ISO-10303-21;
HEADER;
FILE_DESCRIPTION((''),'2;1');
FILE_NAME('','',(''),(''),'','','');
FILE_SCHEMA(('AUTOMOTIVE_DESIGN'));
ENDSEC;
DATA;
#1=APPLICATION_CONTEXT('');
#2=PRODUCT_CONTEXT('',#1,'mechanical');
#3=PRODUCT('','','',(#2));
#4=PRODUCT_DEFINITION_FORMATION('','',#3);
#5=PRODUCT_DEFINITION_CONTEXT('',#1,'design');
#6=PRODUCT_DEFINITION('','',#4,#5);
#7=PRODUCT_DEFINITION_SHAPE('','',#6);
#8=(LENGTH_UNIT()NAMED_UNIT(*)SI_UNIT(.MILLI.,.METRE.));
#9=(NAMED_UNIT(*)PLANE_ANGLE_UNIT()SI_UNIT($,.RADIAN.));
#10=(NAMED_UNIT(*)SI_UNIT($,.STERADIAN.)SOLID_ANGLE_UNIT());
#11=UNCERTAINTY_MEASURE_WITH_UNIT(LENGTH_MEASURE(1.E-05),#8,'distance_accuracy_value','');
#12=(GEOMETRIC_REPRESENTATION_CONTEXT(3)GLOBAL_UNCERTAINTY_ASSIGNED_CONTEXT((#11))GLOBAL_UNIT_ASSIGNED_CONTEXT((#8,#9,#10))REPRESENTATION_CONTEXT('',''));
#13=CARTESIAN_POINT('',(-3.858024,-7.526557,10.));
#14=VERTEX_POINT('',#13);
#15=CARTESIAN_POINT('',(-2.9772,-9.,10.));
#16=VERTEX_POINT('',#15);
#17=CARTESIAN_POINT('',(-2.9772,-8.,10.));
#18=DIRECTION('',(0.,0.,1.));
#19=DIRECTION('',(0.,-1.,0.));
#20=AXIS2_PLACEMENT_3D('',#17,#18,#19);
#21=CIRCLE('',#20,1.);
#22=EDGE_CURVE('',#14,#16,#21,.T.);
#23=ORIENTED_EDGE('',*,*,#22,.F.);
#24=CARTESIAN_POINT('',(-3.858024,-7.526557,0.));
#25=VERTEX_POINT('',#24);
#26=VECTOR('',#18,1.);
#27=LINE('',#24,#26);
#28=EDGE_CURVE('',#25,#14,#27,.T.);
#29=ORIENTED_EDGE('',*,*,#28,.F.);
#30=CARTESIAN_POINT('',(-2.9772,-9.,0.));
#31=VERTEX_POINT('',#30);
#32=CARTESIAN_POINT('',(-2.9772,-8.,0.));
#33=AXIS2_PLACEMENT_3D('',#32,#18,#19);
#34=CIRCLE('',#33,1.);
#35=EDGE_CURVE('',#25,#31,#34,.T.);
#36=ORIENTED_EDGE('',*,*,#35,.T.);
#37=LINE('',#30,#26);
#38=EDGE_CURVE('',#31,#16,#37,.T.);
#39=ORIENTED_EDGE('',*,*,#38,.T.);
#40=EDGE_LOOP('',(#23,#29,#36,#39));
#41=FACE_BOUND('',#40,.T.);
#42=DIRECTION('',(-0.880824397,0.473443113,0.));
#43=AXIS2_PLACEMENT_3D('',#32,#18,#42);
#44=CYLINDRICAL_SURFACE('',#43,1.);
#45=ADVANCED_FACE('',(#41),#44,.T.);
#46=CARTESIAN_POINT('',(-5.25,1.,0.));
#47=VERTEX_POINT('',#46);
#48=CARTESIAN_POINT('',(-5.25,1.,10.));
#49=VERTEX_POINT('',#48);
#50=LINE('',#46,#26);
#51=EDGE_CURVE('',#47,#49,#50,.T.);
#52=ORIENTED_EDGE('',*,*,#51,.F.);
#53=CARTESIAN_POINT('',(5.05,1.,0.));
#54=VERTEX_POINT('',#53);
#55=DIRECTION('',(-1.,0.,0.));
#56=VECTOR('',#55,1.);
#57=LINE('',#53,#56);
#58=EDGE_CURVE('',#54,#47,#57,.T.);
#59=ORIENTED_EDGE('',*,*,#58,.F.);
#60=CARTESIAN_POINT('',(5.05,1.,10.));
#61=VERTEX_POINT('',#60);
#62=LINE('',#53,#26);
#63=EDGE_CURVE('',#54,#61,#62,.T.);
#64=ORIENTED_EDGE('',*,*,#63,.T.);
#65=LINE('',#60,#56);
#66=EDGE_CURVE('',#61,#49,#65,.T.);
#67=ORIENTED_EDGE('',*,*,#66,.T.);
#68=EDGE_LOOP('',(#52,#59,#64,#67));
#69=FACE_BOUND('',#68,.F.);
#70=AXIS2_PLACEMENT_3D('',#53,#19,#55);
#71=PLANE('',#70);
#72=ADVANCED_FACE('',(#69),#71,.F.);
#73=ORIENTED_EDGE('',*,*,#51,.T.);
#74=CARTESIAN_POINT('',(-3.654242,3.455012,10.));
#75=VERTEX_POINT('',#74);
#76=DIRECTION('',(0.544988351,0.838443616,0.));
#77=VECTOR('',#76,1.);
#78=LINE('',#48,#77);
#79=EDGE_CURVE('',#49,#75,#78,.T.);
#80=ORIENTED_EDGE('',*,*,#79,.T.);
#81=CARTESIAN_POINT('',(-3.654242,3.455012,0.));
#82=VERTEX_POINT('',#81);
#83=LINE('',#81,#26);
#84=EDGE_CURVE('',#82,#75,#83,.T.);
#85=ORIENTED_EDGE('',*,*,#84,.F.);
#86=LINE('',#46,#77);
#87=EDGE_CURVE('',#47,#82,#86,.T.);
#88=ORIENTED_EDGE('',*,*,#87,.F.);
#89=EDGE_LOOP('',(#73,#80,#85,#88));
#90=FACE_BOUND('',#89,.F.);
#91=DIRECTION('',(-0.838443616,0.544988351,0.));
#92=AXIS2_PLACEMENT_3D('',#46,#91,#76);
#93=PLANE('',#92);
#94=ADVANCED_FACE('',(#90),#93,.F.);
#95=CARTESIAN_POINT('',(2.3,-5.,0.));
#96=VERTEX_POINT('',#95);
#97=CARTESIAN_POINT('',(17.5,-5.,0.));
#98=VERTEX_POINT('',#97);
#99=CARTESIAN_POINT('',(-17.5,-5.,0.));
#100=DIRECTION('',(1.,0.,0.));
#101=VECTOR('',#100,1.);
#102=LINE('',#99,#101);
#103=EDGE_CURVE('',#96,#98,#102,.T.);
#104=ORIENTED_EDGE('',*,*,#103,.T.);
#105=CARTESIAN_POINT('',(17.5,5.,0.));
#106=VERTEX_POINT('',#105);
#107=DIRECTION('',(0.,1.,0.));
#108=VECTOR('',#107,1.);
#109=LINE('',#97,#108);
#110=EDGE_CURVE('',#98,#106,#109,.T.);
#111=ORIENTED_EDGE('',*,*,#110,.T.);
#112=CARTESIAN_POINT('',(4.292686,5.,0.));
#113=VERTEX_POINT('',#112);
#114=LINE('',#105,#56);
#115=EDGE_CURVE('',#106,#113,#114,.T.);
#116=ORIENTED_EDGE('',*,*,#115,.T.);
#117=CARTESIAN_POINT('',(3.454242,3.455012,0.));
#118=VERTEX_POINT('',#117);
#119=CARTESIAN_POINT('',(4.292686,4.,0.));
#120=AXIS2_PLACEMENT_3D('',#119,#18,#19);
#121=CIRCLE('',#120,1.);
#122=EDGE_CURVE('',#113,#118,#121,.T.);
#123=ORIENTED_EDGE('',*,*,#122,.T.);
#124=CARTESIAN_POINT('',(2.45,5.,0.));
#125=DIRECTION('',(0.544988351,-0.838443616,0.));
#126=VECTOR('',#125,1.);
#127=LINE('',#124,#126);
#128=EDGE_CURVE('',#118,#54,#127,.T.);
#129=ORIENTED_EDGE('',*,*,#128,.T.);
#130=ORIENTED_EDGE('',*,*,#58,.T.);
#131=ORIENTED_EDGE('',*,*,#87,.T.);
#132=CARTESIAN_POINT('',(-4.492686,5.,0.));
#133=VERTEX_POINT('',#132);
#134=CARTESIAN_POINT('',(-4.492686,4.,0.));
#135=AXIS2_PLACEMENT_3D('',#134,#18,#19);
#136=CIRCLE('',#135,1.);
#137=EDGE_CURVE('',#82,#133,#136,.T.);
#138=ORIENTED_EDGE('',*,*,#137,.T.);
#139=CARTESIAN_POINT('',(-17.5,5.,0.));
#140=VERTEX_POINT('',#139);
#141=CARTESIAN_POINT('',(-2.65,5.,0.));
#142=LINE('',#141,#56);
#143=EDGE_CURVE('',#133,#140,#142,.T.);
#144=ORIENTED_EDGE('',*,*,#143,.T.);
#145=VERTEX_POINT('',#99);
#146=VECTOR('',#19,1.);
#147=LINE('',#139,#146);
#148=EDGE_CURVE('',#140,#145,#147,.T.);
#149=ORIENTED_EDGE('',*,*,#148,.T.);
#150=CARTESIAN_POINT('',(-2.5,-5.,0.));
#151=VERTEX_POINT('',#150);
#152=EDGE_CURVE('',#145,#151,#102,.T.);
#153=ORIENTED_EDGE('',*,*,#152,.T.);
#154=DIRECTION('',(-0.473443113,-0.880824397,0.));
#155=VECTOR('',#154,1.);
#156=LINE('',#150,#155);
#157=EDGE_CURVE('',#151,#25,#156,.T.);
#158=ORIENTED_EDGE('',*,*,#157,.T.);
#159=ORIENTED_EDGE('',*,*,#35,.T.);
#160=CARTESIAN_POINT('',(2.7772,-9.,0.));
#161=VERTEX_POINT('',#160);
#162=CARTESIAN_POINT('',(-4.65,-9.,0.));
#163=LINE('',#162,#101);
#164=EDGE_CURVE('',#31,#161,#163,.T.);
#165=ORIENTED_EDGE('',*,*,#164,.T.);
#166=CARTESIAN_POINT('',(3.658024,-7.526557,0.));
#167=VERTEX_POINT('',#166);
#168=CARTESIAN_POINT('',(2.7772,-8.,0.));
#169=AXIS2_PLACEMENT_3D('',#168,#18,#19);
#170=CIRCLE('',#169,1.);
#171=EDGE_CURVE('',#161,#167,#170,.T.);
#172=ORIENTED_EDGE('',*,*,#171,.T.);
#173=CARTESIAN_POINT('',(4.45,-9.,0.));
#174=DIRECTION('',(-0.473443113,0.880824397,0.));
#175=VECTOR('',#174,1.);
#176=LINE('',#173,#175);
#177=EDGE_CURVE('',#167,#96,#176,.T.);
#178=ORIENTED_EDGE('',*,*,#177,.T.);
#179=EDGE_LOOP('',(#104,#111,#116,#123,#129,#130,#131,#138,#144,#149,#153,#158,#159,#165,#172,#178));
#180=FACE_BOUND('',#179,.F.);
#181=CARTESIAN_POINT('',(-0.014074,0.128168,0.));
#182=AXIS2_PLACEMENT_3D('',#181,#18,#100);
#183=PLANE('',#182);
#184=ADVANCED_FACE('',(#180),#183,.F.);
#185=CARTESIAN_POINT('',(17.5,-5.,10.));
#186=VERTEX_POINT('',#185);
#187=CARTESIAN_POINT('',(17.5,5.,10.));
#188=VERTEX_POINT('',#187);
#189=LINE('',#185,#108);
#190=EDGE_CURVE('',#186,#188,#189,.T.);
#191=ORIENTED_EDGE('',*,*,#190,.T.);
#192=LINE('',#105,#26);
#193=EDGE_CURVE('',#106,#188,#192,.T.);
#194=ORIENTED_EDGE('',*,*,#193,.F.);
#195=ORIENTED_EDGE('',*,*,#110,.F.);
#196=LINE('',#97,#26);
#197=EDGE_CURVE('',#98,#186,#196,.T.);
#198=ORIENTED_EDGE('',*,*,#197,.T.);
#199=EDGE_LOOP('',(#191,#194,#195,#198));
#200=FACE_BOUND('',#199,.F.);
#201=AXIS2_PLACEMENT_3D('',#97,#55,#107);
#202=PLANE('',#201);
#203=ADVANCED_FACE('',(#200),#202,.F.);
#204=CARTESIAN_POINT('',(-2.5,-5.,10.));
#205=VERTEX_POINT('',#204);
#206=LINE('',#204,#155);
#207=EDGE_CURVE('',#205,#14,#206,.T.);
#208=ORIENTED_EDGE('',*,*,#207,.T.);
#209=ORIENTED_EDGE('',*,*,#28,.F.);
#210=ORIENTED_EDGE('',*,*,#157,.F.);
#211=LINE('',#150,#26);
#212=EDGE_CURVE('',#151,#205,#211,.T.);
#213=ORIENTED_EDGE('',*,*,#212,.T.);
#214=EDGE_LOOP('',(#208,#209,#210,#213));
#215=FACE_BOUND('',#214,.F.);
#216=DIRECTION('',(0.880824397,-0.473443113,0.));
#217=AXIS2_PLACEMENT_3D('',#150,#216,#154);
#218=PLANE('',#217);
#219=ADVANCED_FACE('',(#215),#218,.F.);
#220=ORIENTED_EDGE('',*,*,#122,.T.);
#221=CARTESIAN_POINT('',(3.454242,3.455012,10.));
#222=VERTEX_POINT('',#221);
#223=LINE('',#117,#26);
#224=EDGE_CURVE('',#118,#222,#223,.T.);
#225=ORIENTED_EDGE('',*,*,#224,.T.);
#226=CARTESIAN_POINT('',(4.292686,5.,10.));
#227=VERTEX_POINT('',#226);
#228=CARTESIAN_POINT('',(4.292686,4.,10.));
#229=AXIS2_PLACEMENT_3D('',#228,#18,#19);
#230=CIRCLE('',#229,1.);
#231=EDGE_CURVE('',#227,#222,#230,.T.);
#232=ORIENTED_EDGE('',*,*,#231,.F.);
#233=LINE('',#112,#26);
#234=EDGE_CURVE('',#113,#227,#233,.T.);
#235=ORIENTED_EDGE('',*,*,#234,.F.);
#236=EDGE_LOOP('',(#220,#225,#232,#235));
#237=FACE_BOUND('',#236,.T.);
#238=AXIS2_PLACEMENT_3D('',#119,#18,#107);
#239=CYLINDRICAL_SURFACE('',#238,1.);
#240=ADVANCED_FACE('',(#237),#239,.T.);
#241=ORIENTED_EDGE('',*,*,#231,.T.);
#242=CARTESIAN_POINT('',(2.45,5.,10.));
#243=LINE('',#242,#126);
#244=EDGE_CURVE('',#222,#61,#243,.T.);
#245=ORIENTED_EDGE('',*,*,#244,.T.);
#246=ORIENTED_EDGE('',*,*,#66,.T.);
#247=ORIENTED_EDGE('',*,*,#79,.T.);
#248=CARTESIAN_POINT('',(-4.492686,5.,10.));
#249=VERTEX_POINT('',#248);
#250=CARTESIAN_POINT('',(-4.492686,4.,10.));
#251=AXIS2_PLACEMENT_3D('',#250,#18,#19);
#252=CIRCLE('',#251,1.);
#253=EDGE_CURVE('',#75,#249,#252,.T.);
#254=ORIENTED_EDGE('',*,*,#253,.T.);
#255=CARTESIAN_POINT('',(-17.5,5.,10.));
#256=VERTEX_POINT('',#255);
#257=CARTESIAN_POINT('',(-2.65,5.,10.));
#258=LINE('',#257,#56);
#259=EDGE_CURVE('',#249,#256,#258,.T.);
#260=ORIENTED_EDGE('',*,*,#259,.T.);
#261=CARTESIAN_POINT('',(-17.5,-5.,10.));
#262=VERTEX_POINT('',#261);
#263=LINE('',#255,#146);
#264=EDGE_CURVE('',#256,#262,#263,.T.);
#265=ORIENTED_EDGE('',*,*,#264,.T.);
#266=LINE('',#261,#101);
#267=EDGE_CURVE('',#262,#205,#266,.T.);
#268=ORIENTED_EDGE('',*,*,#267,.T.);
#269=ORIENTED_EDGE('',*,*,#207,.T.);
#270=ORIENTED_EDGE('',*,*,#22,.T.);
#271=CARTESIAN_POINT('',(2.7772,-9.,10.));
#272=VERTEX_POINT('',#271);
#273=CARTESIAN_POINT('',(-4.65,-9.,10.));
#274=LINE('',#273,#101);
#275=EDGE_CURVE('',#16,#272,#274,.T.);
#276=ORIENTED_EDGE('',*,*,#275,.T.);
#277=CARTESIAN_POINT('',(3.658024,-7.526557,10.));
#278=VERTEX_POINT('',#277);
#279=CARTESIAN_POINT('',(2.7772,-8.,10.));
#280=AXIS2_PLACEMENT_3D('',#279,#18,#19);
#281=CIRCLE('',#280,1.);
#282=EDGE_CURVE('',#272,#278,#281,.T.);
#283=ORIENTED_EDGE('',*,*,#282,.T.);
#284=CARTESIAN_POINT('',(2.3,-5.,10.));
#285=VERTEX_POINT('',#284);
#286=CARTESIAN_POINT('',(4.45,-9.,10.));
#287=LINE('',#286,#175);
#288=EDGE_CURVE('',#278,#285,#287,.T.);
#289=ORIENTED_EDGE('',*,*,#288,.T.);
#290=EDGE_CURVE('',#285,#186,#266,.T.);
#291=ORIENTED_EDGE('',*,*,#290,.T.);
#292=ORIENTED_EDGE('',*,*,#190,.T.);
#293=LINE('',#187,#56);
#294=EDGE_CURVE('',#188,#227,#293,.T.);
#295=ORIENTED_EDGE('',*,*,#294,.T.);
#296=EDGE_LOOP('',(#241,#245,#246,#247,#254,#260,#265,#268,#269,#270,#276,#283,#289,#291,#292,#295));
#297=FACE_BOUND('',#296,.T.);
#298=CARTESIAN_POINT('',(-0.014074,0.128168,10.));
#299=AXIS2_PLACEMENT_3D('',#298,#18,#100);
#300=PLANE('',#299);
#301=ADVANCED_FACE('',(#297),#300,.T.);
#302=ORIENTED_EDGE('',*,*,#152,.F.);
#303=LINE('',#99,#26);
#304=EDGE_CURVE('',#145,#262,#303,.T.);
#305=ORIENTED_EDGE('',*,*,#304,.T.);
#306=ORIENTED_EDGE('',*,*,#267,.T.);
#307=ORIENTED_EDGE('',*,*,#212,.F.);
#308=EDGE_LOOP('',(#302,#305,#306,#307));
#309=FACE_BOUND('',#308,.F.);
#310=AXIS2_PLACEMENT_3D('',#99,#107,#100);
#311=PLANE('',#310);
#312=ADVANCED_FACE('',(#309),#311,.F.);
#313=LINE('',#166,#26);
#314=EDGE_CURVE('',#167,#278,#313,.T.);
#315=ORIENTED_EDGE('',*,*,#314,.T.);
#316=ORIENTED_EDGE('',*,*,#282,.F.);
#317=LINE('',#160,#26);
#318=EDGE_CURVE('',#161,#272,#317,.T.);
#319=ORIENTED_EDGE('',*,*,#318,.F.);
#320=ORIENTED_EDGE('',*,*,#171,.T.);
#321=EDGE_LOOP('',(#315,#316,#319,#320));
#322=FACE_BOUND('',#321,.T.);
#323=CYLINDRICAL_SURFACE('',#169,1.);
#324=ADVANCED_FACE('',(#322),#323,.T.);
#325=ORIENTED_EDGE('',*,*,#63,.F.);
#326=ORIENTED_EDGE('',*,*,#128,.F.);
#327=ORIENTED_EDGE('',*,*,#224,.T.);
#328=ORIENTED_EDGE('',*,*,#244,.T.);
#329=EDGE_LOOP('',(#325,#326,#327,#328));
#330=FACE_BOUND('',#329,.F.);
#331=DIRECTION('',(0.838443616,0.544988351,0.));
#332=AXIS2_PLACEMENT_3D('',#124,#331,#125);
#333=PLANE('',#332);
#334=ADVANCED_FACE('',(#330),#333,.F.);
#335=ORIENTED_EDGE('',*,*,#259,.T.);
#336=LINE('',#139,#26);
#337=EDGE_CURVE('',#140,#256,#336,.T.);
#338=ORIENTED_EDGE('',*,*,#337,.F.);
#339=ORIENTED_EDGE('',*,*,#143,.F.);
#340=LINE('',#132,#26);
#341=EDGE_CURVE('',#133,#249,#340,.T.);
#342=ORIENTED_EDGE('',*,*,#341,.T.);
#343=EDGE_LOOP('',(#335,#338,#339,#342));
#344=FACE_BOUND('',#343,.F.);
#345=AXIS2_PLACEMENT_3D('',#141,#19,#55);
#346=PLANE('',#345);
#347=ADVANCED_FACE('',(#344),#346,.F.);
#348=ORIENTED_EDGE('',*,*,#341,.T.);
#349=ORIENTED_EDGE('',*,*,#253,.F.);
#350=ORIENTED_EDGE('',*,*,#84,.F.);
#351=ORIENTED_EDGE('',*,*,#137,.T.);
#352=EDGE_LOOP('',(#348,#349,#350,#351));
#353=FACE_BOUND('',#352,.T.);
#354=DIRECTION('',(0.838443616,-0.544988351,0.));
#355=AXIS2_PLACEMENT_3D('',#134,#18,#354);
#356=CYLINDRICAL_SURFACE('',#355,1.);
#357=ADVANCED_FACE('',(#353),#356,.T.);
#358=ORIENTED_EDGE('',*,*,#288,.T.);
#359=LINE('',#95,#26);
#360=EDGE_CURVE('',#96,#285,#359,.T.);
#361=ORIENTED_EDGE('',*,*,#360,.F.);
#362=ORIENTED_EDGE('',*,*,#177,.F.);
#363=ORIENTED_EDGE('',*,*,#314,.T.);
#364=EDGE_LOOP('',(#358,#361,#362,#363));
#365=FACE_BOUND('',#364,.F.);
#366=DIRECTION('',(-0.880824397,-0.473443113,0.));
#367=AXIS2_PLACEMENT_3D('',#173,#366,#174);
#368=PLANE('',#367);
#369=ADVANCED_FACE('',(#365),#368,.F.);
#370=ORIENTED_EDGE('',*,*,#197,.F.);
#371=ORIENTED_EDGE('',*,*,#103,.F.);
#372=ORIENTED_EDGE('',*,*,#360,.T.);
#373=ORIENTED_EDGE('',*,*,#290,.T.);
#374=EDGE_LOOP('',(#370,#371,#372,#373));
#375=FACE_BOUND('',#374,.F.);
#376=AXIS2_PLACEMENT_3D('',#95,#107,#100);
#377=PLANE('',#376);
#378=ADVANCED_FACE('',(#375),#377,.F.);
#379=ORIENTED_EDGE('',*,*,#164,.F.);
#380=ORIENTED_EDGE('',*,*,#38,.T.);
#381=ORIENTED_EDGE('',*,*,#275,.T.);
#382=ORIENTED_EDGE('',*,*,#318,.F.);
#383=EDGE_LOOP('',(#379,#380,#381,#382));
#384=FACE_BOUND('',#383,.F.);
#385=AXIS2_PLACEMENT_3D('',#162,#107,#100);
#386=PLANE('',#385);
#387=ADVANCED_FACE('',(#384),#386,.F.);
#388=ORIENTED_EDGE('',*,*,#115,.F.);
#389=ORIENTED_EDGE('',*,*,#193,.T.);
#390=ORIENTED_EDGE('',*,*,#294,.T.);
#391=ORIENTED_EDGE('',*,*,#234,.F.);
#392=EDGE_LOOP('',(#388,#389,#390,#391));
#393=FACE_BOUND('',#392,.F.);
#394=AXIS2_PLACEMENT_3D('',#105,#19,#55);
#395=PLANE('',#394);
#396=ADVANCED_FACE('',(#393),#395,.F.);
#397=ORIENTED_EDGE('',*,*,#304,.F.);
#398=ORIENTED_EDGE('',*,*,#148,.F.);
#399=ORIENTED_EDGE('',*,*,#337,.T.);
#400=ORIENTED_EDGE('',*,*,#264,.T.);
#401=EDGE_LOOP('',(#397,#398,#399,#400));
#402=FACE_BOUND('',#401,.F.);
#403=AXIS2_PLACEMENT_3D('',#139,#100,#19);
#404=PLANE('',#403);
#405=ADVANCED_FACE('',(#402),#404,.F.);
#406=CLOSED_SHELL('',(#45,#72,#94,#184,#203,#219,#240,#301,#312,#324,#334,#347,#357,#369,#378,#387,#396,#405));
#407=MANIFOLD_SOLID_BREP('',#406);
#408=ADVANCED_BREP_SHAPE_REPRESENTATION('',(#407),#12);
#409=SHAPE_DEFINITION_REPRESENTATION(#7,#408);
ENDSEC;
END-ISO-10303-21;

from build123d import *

# Parameters (mm, degrees)
F1_DEPTH = 10
F2_R     = 1


# Not quite as in the source:
# - a feature names something its author has since deleted; it is built from what else it names


with BuildPart() as f1:
    # F0 (on Top) → F1 (new body)
    with BuildSketch(Plane.XY):
        Polygon((2.3, -5), (17.5, -5), (17.5, 5), (2.45, 5), (5.05, 1), (-5.25, 1), (-2.65, 5), (-17.5, 5), (-17.5, -5), (-2.5, -5), align=None)
        Polygon((4.45, -9), (2.3, -5), (-2.5, -5), (-4.65, -9), align=None)
    extrude(amount=F1_DEPTH)

    # F2
    f2_edges = [f1.edges().sort_by_distance(p)[0] for p in [
        (-2.65, 5, 5),
        (2.45, 5, 5),
        (4.45, -9, 5),
        (-4.65, -9, 5),
    ]]
    fillet(f2_edges, radius=F2_R)


solid = f1.part
